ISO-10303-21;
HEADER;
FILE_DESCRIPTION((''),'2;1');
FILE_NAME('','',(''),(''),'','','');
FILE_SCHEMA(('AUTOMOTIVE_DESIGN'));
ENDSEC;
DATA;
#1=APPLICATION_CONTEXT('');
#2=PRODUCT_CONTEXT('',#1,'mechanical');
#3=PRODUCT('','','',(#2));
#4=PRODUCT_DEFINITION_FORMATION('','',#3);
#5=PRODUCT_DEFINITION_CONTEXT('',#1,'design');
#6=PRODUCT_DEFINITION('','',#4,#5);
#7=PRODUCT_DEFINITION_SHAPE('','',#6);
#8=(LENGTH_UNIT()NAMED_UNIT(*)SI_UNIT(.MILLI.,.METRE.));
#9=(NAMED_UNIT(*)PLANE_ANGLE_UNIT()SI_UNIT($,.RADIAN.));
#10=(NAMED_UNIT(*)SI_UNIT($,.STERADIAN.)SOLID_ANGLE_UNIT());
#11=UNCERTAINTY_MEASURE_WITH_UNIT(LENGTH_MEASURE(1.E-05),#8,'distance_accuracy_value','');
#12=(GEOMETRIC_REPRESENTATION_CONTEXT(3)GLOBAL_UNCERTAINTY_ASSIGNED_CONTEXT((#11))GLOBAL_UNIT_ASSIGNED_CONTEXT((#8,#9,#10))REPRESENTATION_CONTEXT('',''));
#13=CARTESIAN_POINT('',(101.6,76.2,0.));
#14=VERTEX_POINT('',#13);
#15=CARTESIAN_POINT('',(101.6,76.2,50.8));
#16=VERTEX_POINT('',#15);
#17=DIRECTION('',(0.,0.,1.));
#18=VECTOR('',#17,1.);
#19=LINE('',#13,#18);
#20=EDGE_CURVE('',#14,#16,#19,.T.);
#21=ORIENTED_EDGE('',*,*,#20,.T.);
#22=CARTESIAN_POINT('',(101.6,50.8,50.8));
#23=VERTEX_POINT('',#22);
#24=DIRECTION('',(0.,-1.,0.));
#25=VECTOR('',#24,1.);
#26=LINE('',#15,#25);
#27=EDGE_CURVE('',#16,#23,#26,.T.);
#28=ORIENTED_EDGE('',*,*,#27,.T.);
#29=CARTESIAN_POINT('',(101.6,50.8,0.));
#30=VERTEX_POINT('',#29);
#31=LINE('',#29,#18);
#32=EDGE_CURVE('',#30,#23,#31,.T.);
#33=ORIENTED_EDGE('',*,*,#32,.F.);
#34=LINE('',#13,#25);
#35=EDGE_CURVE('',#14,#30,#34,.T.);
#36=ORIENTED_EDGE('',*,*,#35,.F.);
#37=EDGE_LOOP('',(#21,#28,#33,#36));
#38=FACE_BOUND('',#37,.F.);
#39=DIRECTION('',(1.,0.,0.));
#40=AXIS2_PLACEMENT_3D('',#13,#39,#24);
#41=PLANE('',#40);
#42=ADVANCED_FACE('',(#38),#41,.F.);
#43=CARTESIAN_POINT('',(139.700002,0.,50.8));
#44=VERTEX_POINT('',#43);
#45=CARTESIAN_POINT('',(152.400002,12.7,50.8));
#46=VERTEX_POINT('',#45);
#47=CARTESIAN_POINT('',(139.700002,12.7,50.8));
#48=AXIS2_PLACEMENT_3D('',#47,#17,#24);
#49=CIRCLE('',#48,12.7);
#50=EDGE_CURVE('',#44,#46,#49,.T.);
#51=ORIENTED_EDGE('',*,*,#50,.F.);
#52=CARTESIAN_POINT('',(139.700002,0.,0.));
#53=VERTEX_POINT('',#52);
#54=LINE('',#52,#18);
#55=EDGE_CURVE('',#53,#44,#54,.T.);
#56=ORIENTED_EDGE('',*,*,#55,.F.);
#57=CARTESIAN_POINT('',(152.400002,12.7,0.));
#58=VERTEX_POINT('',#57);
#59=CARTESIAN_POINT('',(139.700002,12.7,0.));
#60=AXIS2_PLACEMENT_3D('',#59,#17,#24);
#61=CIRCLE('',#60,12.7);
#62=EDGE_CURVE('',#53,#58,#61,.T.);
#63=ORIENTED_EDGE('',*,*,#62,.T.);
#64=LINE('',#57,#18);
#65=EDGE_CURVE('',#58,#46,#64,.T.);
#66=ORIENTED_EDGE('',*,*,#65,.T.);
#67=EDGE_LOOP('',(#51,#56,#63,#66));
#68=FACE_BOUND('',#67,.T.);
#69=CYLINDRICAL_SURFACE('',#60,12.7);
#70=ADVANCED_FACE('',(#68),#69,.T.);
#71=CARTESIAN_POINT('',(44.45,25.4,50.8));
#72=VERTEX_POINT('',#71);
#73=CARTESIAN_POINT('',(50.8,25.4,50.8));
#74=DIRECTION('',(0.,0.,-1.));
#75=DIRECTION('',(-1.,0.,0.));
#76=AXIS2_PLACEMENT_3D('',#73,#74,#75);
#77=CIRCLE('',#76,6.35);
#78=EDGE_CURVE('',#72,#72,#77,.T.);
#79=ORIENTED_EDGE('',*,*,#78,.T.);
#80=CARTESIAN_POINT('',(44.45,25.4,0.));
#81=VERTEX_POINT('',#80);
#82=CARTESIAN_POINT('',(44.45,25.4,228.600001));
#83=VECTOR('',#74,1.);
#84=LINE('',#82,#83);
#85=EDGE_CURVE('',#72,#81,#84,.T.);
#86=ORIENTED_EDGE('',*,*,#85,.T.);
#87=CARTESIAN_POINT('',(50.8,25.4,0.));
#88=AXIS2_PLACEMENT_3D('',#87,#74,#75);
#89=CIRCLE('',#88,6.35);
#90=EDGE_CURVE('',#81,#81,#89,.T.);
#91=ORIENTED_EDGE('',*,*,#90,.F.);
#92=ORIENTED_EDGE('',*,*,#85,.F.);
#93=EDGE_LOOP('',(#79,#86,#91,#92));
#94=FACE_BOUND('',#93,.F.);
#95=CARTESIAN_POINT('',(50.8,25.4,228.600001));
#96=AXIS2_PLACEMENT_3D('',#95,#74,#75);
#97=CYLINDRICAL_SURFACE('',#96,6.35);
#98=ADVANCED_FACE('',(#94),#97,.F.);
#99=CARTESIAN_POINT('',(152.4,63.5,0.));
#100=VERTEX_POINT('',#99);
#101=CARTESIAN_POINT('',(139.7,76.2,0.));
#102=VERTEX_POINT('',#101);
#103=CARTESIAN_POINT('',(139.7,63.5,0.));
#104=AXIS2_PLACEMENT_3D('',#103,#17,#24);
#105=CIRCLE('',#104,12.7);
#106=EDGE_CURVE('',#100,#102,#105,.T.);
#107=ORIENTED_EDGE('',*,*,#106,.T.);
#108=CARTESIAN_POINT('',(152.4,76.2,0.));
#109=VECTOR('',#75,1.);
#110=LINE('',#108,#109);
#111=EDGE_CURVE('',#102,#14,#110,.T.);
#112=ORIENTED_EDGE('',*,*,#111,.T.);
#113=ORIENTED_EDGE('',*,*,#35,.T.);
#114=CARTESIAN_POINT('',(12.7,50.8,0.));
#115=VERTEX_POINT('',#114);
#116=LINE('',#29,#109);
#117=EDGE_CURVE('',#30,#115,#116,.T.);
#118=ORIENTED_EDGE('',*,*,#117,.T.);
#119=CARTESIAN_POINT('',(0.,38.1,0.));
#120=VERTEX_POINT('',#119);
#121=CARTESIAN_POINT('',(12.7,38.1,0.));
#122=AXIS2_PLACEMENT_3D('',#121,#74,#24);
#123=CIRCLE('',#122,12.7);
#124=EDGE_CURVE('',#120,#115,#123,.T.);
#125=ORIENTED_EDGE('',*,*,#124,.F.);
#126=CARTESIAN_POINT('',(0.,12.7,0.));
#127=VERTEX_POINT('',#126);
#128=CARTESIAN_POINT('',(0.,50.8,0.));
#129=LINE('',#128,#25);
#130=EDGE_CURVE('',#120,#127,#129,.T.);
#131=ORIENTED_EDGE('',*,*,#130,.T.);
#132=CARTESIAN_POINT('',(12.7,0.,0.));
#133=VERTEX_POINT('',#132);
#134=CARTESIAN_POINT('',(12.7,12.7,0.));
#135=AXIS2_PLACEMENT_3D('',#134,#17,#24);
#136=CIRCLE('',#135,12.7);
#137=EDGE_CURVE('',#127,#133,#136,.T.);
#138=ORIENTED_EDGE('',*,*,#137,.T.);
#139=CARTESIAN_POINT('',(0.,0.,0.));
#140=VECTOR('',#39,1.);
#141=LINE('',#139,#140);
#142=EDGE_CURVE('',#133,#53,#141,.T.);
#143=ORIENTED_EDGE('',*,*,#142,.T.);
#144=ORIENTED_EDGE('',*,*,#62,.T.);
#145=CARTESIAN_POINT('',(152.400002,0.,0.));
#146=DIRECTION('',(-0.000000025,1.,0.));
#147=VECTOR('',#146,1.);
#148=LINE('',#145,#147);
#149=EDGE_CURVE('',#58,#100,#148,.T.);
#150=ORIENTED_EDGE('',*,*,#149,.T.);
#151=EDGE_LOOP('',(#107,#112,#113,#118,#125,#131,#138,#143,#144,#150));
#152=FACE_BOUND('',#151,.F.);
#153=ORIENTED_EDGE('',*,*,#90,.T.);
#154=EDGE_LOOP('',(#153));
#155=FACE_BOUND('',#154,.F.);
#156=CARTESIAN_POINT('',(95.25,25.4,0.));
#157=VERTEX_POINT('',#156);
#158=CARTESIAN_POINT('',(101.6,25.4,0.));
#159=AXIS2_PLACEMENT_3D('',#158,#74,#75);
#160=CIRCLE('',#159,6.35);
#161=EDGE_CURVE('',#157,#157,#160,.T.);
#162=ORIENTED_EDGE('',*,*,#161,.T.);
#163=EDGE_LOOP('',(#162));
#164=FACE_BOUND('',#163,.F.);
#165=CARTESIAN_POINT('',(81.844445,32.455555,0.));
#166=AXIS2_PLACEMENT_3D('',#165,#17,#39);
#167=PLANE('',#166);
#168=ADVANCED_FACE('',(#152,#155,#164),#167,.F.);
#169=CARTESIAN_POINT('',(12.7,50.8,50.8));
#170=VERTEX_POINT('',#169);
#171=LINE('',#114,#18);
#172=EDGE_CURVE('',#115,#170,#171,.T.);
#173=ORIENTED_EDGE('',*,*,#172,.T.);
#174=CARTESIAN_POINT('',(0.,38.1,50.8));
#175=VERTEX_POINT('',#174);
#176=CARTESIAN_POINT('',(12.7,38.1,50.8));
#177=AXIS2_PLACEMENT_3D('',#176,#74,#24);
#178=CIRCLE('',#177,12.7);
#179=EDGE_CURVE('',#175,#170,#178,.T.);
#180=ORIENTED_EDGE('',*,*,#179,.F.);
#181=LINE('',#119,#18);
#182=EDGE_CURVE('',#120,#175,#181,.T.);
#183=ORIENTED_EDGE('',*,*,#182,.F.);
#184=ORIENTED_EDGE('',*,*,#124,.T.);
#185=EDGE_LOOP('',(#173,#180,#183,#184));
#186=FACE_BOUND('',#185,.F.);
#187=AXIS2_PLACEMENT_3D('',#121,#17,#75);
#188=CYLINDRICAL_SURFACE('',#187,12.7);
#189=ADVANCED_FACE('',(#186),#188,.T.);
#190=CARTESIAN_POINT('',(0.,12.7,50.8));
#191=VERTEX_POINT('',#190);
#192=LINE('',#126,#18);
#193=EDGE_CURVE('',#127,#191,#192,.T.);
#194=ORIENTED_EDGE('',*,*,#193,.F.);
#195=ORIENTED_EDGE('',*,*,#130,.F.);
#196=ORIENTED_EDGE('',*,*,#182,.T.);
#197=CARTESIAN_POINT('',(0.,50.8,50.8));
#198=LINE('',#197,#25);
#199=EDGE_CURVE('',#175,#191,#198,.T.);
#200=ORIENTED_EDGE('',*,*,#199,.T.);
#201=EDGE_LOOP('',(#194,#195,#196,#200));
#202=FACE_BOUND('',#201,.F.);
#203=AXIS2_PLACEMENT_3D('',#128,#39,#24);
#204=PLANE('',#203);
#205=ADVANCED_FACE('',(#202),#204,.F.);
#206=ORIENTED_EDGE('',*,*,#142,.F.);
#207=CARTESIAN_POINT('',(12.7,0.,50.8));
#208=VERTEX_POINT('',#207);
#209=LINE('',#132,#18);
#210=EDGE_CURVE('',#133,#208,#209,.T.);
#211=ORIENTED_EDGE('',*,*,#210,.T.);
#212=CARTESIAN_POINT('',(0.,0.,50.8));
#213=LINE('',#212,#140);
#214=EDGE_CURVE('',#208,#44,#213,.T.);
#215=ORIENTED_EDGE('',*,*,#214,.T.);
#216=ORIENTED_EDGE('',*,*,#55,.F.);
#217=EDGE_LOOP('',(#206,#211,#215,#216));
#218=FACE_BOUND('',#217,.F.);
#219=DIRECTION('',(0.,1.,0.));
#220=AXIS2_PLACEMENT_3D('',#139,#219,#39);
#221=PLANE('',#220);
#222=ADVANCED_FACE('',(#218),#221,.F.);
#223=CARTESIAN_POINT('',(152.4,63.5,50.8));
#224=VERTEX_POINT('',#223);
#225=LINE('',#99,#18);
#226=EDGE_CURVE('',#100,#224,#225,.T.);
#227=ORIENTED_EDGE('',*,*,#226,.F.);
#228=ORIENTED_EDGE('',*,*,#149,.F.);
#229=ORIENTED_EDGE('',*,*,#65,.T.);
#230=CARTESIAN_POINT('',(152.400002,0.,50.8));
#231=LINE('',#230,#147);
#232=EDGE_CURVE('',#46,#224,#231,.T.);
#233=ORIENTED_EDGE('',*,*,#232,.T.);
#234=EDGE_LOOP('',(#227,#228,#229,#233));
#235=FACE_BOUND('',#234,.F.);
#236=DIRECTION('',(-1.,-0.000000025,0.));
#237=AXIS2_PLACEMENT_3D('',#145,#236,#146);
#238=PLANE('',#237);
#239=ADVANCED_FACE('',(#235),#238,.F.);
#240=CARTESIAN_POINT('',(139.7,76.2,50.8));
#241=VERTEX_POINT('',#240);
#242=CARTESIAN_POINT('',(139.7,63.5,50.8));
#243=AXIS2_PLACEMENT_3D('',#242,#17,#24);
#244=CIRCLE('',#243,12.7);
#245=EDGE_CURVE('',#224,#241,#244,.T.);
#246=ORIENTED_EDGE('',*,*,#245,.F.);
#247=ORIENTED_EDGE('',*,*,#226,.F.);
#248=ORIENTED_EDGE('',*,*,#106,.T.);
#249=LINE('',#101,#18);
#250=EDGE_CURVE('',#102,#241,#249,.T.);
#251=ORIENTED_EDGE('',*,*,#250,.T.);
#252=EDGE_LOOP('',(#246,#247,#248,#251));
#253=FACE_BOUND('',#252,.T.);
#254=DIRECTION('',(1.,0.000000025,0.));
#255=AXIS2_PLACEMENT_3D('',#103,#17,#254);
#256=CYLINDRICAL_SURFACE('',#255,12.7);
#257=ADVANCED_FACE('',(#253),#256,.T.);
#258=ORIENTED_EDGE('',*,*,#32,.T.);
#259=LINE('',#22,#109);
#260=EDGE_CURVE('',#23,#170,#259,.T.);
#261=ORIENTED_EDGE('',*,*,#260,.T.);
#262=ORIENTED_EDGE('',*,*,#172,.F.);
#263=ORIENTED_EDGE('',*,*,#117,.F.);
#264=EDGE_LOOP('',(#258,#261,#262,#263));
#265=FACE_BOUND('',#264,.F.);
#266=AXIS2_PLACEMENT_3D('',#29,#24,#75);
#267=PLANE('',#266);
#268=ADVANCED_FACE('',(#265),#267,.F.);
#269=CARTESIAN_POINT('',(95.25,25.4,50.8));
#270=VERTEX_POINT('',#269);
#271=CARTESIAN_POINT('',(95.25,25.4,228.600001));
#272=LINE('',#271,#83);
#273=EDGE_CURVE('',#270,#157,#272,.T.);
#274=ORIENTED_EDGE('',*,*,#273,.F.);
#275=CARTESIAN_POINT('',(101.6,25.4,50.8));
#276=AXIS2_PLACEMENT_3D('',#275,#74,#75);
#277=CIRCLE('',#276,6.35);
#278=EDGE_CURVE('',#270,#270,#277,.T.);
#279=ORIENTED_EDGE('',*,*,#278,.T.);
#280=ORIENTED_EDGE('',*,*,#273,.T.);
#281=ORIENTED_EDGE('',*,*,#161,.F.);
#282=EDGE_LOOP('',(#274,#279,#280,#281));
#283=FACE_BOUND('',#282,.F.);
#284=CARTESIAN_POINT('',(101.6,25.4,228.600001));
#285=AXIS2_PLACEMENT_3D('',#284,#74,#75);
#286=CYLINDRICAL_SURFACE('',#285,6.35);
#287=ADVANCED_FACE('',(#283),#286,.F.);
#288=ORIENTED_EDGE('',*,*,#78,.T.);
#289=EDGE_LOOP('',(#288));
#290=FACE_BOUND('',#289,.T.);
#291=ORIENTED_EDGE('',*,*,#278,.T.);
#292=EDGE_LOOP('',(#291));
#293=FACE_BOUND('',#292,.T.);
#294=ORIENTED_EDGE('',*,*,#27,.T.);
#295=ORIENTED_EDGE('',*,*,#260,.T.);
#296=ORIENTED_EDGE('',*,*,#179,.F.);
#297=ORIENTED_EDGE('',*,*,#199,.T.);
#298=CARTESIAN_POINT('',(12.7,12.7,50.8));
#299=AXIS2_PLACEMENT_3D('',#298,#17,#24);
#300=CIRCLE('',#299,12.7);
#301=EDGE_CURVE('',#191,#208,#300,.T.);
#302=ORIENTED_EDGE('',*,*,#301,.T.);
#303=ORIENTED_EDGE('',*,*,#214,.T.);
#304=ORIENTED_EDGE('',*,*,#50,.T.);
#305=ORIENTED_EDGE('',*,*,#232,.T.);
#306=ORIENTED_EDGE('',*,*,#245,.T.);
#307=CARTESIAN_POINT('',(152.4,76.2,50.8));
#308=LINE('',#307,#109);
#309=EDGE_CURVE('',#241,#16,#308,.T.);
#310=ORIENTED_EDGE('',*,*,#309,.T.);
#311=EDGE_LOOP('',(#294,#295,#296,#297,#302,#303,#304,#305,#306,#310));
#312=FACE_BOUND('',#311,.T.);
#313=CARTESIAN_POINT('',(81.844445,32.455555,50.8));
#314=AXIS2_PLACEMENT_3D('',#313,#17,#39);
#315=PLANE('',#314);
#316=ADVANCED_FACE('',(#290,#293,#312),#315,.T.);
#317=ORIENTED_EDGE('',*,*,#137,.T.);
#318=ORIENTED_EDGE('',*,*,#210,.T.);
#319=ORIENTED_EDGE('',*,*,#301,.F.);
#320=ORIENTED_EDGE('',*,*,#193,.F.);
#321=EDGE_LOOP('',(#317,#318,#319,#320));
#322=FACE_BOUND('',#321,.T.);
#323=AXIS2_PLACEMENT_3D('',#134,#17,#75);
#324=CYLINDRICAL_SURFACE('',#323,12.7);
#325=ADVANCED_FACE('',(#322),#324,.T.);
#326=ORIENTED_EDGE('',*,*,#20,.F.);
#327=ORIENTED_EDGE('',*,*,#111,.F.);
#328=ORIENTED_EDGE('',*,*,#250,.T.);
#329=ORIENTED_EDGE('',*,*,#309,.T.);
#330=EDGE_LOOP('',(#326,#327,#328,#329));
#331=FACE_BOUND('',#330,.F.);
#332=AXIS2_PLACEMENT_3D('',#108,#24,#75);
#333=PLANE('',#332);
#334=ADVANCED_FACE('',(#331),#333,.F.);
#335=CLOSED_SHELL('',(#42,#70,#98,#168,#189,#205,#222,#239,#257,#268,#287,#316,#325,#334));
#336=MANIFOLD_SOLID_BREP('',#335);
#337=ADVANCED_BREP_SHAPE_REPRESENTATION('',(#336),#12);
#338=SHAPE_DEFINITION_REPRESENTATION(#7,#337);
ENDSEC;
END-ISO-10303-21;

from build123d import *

# Parameters (mm, degrees)
F1_DEPTH = 50.8
F2_R     = 12.7
F4_D     = 12.7


# Not quite as in the source:
# - ends of sketch curves that miss each other by under 0.0002 mm in the source are joined


with BuildPart() as f1:
    # F0 (on Top) → F1 (new body)
    with BuildSketch(Plane.XY):
        Polygon((0, 50.8), (0, 0), (152.4000018835, 0), (152.4, 76.2), (101.6, 76.2), (101.6, 50.8), align=None)
    extrude(amount=F1_DEPTH)

    # F2
    f2_edges = [f1.edges().sort_by_distance(p)[0] for p in [
        (0, 0, 25.4),
        (0, 50.8, 25.4),
        (152.4, 76.2, 25.4),
        (152.400002, 0, 25.4),
    ]]
    fillet(f2_edges, radius=F2_R)

    # F4 (through all)
    with Locations(Plane.XY.offset(50.8)):
        with Locations((50.8, 25.4), (101.6, 25.4)):
            Hole(F4_D / 2)


solid = f1.part
